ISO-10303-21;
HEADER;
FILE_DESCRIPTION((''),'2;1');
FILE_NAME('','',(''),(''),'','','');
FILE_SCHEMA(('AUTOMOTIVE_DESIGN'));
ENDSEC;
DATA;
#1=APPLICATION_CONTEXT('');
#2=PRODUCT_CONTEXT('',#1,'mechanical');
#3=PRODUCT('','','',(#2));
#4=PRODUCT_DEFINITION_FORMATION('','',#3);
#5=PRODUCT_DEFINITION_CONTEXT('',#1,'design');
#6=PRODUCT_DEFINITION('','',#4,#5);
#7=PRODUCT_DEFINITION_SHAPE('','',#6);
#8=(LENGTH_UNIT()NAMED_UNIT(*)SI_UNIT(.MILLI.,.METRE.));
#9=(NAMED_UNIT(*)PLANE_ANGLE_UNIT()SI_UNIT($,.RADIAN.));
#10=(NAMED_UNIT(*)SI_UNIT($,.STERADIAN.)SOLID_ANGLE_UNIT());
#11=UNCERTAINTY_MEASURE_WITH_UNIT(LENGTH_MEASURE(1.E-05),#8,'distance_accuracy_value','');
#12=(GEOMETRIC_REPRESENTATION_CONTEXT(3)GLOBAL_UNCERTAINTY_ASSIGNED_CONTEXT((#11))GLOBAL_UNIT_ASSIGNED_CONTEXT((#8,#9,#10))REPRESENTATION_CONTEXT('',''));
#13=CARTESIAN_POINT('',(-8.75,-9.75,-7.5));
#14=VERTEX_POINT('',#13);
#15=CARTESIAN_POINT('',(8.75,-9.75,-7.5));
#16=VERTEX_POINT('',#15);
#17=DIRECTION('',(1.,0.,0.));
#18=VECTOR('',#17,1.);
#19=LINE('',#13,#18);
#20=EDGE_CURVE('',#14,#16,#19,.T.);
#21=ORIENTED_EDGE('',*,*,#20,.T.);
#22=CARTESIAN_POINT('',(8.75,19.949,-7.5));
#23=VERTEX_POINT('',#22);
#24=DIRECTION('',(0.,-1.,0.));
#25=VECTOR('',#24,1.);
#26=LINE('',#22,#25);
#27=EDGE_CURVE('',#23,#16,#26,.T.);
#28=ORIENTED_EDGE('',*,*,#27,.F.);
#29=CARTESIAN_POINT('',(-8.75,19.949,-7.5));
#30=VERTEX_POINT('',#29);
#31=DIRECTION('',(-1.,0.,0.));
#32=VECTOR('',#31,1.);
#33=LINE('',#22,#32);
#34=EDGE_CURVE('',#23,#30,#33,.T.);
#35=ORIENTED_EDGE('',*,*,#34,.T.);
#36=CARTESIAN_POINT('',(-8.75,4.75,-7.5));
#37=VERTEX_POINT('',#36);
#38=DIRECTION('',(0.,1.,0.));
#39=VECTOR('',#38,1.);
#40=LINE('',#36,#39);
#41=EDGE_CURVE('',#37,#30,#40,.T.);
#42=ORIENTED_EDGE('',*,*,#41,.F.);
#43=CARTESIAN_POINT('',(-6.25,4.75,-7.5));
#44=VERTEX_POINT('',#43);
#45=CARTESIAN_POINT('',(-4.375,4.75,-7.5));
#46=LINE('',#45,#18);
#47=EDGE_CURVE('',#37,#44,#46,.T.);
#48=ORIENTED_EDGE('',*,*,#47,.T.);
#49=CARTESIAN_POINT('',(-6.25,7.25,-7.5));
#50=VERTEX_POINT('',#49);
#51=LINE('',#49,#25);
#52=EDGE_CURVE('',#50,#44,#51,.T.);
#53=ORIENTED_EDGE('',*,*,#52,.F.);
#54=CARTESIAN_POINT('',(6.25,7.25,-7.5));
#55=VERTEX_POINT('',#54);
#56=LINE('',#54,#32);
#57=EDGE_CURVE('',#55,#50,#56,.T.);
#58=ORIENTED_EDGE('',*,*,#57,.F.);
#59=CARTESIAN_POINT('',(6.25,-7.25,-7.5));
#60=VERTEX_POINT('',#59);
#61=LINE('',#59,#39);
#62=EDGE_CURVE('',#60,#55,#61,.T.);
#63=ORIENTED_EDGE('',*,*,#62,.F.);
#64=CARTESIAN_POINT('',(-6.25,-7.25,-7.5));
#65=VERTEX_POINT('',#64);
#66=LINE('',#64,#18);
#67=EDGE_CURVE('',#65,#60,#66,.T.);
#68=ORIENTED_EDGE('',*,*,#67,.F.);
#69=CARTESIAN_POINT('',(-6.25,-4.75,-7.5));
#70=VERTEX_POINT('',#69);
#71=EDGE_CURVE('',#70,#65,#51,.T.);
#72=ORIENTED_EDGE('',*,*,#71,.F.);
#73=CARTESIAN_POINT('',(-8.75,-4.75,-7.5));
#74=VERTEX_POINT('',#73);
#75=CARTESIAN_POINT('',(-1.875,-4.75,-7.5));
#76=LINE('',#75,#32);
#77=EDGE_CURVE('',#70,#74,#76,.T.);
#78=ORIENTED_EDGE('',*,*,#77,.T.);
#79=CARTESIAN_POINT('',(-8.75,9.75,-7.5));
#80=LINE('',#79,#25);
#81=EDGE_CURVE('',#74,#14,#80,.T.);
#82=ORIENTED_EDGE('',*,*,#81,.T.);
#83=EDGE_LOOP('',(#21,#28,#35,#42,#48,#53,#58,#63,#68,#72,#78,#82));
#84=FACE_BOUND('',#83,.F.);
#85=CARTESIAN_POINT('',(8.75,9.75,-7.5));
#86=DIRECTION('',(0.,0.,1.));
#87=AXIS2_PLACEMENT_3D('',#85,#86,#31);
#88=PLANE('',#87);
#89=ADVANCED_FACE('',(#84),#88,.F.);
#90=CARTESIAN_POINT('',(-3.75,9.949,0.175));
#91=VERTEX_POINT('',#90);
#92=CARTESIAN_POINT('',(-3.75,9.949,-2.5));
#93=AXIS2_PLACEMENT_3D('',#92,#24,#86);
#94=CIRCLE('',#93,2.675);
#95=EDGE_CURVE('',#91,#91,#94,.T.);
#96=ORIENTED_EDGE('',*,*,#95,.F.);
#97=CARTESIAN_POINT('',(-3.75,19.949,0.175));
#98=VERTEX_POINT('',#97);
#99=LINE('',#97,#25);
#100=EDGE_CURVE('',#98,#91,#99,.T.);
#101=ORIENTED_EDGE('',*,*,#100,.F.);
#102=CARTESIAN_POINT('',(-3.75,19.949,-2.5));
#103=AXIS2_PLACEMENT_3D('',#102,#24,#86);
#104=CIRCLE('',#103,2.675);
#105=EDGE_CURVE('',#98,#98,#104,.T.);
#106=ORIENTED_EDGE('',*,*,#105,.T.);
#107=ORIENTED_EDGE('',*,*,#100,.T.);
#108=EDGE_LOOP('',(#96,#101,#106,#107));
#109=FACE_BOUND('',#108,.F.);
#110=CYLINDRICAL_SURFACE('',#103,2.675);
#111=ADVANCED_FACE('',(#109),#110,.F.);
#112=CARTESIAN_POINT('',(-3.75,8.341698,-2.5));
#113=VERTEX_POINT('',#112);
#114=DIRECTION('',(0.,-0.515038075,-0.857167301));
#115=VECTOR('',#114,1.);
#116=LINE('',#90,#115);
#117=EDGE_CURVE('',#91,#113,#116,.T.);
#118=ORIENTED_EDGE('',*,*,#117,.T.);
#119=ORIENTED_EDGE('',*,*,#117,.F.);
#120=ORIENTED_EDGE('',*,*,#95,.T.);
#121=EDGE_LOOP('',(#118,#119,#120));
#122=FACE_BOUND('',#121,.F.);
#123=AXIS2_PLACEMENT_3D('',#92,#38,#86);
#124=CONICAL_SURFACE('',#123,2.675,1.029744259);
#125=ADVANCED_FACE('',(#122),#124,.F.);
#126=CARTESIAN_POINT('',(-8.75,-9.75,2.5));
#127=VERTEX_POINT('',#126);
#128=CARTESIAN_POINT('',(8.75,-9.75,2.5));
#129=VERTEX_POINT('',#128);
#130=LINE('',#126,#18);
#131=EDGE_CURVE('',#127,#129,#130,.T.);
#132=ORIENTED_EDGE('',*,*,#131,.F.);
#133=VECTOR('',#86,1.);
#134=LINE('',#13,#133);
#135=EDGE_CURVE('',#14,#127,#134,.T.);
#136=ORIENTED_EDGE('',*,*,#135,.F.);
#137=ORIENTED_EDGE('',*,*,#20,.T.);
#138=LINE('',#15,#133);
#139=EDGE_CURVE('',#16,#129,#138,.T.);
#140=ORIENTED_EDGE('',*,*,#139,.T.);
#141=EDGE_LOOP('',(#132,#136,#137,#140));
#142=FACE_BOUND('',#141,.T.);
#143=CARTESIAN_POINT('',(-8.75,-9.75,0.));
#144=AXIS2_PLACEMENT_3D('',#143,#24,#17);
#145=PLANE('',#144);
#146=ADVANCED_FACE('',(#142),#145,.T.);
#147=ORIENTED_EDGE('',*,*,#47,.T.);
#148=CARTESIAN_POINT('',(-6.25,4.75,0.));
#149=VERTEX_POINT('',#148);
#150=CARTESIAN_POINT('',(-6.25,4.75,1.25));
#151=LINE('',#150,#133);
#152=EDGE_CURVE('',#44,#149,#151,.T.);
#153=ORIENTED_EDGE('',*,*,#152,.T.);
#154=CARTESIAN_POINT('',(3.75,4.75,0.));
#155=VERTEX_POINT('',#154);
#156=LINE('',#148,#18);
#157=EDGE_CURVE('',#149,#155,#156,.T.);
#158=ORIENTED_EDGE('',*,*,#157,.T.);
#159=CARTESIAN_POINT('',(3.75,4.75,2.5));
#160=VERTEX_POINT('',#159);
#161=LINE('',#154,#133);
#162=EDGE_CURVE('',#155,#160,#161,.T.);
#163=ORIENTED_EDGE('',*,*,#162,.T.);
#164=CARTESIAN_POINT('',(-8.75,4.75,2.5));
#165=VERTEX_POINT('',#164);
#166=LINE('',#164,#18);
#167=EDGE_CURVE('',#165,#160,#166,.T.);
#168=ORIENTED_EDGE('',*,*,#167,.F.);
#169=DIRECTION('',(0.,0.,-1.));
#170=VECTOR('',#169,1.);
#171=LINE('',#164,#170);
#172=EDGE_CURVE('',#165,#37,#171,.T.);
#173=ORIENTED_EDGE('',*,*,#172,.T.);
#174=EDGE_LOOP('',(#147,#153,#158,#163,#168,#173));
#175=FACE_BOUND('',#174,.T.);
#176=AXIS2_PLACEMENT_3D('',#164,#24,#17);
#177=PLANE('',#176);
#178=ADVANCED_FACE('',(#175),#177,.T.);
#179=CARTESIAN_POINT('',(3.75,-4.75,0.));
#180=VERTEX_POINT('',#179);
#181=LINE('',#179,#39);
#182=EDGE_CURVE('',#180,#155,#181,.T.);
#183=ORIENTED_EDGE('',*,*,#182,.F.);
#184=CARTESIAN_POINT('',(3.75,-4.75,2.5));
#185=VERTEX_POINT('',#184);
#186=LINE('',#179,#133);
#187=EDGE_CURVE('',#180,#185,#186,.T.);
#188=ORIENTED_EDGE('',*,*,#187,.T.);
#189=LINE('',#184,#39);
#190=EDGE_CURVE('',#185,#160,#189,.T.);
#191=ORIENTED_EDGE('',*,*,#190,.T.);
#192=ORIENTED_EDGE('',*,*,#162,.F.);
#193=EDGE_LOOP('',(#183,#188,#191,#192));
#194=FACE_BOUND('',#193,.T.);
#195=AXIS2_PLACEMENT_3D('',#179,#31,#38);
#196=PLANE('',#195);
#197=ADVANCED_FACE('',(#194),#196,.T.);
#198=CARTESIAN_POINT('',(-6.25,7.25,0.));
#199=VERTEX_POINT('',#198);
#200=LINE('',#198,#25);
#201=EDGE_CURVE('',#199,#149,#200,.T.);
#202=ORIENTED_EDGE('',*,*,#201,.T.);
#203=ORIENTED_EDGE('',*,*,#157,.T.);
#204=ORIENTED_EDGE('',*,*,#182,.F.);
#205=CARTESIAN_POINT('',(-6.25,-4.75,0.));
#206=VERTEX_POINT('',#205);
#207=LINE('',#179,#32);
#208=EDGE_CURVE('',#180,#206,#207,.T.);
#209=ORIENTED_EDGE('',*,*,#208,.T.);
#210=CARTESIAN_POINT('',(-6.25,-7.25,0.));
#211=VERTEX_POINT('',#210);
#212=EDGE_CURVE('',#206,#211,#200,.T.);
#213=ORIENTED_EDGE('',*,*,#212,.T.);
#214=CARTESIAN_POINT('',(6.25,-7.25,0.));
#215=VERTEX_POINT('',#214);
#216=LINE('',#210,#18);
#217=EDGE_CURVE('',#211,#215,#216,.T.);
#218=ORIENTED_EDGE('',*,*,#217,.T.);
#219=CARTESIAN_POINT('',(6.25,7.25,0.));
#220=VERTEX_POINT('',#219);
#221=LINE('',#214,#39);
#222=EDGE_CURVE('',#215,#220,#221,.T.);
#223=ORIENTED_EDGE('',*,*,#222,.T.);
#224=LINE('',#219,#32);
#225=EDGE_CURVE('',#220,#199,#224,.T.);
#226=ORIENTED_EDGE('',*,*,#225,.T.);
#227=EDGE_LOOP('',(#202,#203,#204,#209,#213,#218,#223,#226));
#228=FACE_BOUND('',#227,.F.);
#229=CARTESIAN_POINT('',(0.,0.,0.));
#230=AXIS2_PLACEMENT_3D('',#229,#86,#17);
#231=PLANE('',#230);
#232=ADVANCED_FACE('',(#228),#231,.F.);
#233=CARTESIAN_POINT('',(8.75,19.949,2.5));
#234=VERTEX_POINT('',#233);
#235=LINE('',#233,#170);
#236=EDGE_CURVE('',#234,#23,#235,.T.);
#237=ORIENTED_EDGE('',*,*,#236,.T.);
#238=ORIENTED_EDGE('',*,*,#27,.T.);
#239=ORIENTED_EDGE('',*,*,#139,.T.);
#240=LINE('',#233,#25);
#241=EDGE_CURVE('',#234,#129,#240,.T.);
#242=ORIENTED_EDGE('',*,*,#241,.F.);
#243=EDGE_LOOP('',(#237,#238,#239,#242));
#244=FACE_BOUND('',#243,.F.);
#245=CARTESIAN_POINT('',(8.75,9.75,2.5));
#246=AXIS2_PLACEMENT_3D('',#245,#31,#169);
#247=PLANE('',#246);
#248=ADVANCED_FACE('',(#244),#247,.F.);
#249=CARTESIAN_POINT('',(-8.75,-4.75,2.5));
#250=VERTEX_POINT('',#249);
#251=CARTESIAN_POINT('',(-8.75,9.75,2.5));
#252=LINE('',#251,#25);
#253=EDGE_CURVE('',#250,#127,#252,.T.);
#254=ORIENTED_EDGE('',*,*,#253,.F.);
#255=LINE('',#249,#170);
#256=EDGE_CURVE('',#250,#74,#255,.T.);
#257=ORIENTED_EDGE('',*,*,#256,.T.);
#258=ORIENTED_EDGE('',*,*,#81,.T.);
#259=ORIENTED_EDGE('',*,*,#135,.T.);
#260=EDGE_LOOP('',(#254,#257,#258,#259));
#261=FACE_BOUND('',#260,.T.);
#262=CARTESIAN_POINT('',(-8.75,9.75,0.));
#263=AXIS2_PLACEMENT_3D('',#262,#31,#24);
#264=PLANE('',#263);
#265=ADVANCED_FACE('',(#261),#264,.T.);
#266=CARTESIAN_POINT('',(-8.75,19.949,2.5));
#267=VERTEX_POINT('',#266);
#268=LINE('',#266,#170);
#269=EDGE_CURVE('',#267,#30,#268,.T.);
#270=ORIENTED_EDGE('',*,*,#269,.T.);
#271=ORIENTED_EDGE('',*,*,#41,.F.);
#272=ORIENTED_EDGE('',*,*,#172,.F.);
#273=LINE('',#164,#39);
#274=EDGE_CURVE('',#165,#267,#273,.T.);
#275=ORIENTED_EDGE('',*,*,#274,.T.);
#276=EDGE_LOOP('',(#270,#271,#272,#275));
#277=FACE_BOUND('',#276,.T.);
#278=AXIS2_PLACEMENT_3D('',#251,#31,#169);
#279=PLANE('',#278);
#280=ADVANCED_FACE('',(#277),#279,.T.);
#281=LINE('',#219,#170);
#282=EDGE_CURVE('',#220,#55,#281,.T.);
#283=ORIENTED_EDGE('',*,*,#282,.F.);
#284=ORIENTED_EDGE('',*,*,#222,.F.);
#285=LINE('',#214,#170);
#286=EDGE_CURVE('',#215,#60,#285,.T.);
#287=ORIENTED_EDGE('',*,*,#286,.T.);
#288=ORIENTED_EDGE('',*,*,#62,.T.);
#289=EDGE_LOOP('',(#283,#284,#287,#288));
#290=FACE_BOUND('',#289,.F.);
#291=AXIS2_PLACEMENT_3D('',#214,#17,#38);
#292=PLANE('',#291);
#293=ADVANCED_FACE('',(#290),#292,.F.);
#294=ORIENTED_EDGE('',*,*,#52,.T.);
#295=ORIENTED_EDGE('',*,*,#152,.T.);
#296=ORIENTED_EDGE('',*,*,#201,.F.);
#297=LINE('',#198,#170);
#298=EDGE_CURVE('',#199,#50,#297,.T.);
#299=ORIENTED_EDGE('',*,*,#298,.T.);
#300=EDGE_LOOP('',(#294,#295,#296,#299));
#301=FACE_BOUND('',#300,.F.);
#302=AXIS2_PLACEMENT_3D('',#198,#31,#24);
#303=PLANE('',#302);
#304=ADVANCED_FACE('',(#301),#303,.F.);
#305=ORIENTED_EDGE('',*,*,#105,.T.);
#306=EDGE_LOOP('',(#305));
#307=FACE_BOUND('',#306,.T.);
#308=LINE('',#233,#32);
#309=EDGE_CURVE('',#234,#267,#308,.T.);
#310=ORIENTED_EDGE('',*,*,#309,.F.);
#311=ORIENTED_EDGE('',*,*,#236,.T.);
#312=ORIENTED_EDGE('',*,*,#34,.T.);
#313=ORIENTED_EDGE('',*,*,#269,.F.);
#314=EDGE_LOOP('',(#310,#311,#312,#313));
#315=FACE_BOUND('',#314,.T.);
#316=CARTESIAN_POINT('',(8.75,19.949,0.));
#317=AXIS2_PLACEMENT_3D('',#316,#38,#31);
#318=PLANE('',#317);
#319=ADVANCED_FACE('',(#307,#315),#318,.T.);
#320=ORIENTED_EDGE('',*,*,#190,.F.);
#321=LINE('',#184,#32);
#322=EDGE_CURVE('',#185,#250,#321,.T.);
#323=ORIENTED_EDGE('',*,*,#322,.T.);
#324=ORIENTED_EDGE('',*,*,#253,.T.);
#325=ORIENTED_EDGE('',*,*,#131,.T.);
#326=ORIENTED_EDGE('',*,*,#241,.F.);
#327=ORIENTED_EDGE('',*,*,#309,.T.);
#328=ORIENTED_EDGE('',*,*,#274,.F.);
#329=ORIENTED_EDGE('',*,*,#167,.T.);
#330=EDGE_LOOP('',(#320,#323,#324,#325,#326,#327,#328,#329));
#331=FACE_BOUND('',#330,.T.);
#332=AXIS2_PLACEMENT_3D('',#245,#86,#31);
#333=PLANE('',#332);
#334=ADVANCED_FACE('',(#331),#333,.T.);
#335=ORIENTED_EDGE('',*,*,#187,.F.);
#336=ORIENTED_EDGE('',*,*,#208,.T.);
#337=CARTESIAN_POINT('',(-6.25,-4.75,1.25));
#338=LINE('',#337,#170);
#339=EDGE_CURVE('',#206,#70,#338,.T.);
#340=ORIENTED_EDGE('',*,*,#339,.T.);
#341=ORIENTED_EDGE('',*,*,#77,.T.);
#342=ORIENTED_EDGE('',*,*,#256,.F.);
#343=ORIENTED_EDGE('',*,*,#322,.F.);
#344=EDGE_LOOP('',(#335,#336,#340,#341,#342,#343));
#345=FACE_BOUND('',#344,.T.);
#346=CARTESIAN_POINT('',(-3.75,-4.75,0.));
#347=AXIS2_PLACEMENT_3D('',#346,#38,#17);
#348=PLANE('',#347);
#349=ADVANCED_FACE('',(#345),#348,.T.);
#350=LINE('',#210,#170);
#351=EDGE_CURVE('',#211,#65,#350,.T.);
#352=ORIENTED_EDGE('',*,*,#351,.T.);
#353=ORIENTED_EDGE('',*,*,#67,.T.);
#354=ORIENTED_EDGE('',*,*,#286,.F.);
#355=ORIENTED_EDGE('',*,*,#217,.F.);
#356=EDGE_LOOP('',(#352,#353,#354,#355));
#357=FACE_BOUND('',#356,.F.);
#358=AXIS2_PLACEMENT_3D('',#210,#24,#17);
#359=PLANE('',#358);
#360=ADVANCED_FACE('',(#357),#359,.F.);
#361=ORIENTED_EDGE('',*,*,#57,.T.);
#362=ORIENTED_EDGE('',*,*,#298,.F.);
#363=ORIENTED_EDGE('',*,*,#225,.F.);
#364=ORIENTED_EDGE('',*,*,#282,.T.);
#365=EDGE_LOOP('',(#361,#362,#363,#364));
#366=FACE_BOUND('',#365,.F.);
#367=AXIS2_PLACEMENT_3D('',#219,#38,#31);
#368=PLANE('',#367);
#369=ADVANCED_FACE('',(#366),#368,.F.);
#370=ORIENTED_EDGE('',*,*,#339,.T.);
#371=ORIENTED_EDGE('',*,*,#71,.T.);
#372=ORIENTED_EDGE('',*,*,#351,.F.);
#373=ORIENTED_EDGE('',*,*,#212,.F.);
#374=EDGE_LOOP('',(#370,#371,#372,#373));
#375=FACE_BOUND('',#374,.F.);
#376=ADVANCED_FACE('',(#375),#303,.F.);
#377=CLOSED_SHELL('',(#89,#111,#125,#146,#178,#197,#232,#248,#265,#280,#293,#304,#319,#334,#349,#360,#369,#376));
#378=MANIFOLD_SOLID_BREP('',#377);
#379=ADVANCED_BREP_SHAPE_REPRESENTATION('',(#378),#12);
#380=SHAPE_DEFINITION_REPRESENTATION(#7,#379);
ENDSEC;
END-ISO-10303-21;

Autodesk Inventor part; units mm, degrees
ref_plane "YZ Plane" through (0, 0, 0) normal (1, 0, 0) x (0, 1, 0)
ref_plane "XZ Plane" through (0, 0, 0) normal (0, 1, 0) x (-1, 0, 0)
ref_plane "XY Plane" through (0, 0, 0) normal (0, 0, 1) x (1, 0, 0)
sketch "Sketch1" plane through (0, 0, 0) normal (0, 0, 1) x (1, 0, 0)
  line L0 (-6.25, -7.25) -> (6.25, -7.25)
  line L1 (6.25, -7.25) -> (6.25, 7.25)
  line L2 (6.25, 7.25) -> (-6.25, 7.25)
  line L3 (-6.25, 7.25) -> (-6.25, -7.25)
  line L4 (-6.25, -7.25) -> (6.25, 7.25) construction
  line L5 (6.25, -7.25) -> (-6.25, 7.25) construction
  line L6 (-8.75, -9.75) -> (8.75, -9.75)
  line L7 (8.75, -9.75) -> (8.75, 9.75)
  line L8 (8.75, 9.75) -> (-8.75, 9.75)
  line L9 (-8.75, 9.75) -> (-8.75, -9.75)
  line L10 (-8.75, -9.75) -> (8.75, 9.75) construction
  line L11 (8.75, -9.75) -> (-8.75, 9.75) construction
  line L12 (-3.75, -4.75) -> (3.75, -4.75)
  line L13 (3.75, -4.75) -> (3.75, 4.75)
  line L14 (3.75, 4.75) -> (-3.75, 4.75)
  line L15 (-3.75, 4.75) -> (-3.75, -4.75)
  line L16 (-3.75, -4.75) -> (3.75, 4.75) construction
  line L17 (3.75, -4.75) -> (-3.75, 4.75) construction
  point P0 (0, 0)
  dimension "d0" = 12.5
  dimension "d1" = 14.5
  dimension "d2" = 17.5
  dimension "d3" = 19.5
  dimension "d4" = 7.5
  dimension "d5" = 9.5
extrude "Extrusion1" add sketch "Sketch1" along normal blind 2.5 contours L3 L2 L1 L0 | L9 L8 L7 L6
extrude "Extrusion2" add sketch "Sketch1" against normal blind 7.5 contours L9 L8 L7 L6
sketch "Sketch2" plane through (0, 0, 2.5) normal (0, 0, 1) x (1, 0, 0)
  line L0 (-8.75, -9.75) -> (-8.75, 9.75) projected
  line L1 (-3.75, -4.75) -> (-8.75, -4.75)
  line L2 (-8.75, -4.75) -> (-8.75, 4.75)
  line L3 (-8.75, 4.75) -> (-3.75, 4.75)
  line L4 (-3.75, 4.75) -> (-3.75, -4.75)
  line L5 (-3.75, -4.75) -> (-3.75, 4.75) projected
  point P0 (0, 0)
  point P1 (-3.75, 0)
extrude "Extrusion3" cut sketch "Sketch2" against normal through all
thicken "Thicken1" operation add thickness 10.199 both sides no extend neighbours no toward (0, 1, 0) faces at (2.9167, 9.75, -0.8333)
sketch "Sketch3" plane through (-8.75, 19.949, 2.5) normal (0, 1, 0) x (1, 0, 0)
  line L0 (0, 10) -> (0, 0) projected
  point P0 (8.75, 2.5)
  point P1 (5, 5)
  point P2 (0, 5)
  dimension "d22" = 5
hole "Hole1" at (-3.75, 19.949, -2.5) direction (0, -1, 0) diameter 5.35 depth 10 tip angle 118
properties part number "Adafruit_1528_4663-ND_House_01"
